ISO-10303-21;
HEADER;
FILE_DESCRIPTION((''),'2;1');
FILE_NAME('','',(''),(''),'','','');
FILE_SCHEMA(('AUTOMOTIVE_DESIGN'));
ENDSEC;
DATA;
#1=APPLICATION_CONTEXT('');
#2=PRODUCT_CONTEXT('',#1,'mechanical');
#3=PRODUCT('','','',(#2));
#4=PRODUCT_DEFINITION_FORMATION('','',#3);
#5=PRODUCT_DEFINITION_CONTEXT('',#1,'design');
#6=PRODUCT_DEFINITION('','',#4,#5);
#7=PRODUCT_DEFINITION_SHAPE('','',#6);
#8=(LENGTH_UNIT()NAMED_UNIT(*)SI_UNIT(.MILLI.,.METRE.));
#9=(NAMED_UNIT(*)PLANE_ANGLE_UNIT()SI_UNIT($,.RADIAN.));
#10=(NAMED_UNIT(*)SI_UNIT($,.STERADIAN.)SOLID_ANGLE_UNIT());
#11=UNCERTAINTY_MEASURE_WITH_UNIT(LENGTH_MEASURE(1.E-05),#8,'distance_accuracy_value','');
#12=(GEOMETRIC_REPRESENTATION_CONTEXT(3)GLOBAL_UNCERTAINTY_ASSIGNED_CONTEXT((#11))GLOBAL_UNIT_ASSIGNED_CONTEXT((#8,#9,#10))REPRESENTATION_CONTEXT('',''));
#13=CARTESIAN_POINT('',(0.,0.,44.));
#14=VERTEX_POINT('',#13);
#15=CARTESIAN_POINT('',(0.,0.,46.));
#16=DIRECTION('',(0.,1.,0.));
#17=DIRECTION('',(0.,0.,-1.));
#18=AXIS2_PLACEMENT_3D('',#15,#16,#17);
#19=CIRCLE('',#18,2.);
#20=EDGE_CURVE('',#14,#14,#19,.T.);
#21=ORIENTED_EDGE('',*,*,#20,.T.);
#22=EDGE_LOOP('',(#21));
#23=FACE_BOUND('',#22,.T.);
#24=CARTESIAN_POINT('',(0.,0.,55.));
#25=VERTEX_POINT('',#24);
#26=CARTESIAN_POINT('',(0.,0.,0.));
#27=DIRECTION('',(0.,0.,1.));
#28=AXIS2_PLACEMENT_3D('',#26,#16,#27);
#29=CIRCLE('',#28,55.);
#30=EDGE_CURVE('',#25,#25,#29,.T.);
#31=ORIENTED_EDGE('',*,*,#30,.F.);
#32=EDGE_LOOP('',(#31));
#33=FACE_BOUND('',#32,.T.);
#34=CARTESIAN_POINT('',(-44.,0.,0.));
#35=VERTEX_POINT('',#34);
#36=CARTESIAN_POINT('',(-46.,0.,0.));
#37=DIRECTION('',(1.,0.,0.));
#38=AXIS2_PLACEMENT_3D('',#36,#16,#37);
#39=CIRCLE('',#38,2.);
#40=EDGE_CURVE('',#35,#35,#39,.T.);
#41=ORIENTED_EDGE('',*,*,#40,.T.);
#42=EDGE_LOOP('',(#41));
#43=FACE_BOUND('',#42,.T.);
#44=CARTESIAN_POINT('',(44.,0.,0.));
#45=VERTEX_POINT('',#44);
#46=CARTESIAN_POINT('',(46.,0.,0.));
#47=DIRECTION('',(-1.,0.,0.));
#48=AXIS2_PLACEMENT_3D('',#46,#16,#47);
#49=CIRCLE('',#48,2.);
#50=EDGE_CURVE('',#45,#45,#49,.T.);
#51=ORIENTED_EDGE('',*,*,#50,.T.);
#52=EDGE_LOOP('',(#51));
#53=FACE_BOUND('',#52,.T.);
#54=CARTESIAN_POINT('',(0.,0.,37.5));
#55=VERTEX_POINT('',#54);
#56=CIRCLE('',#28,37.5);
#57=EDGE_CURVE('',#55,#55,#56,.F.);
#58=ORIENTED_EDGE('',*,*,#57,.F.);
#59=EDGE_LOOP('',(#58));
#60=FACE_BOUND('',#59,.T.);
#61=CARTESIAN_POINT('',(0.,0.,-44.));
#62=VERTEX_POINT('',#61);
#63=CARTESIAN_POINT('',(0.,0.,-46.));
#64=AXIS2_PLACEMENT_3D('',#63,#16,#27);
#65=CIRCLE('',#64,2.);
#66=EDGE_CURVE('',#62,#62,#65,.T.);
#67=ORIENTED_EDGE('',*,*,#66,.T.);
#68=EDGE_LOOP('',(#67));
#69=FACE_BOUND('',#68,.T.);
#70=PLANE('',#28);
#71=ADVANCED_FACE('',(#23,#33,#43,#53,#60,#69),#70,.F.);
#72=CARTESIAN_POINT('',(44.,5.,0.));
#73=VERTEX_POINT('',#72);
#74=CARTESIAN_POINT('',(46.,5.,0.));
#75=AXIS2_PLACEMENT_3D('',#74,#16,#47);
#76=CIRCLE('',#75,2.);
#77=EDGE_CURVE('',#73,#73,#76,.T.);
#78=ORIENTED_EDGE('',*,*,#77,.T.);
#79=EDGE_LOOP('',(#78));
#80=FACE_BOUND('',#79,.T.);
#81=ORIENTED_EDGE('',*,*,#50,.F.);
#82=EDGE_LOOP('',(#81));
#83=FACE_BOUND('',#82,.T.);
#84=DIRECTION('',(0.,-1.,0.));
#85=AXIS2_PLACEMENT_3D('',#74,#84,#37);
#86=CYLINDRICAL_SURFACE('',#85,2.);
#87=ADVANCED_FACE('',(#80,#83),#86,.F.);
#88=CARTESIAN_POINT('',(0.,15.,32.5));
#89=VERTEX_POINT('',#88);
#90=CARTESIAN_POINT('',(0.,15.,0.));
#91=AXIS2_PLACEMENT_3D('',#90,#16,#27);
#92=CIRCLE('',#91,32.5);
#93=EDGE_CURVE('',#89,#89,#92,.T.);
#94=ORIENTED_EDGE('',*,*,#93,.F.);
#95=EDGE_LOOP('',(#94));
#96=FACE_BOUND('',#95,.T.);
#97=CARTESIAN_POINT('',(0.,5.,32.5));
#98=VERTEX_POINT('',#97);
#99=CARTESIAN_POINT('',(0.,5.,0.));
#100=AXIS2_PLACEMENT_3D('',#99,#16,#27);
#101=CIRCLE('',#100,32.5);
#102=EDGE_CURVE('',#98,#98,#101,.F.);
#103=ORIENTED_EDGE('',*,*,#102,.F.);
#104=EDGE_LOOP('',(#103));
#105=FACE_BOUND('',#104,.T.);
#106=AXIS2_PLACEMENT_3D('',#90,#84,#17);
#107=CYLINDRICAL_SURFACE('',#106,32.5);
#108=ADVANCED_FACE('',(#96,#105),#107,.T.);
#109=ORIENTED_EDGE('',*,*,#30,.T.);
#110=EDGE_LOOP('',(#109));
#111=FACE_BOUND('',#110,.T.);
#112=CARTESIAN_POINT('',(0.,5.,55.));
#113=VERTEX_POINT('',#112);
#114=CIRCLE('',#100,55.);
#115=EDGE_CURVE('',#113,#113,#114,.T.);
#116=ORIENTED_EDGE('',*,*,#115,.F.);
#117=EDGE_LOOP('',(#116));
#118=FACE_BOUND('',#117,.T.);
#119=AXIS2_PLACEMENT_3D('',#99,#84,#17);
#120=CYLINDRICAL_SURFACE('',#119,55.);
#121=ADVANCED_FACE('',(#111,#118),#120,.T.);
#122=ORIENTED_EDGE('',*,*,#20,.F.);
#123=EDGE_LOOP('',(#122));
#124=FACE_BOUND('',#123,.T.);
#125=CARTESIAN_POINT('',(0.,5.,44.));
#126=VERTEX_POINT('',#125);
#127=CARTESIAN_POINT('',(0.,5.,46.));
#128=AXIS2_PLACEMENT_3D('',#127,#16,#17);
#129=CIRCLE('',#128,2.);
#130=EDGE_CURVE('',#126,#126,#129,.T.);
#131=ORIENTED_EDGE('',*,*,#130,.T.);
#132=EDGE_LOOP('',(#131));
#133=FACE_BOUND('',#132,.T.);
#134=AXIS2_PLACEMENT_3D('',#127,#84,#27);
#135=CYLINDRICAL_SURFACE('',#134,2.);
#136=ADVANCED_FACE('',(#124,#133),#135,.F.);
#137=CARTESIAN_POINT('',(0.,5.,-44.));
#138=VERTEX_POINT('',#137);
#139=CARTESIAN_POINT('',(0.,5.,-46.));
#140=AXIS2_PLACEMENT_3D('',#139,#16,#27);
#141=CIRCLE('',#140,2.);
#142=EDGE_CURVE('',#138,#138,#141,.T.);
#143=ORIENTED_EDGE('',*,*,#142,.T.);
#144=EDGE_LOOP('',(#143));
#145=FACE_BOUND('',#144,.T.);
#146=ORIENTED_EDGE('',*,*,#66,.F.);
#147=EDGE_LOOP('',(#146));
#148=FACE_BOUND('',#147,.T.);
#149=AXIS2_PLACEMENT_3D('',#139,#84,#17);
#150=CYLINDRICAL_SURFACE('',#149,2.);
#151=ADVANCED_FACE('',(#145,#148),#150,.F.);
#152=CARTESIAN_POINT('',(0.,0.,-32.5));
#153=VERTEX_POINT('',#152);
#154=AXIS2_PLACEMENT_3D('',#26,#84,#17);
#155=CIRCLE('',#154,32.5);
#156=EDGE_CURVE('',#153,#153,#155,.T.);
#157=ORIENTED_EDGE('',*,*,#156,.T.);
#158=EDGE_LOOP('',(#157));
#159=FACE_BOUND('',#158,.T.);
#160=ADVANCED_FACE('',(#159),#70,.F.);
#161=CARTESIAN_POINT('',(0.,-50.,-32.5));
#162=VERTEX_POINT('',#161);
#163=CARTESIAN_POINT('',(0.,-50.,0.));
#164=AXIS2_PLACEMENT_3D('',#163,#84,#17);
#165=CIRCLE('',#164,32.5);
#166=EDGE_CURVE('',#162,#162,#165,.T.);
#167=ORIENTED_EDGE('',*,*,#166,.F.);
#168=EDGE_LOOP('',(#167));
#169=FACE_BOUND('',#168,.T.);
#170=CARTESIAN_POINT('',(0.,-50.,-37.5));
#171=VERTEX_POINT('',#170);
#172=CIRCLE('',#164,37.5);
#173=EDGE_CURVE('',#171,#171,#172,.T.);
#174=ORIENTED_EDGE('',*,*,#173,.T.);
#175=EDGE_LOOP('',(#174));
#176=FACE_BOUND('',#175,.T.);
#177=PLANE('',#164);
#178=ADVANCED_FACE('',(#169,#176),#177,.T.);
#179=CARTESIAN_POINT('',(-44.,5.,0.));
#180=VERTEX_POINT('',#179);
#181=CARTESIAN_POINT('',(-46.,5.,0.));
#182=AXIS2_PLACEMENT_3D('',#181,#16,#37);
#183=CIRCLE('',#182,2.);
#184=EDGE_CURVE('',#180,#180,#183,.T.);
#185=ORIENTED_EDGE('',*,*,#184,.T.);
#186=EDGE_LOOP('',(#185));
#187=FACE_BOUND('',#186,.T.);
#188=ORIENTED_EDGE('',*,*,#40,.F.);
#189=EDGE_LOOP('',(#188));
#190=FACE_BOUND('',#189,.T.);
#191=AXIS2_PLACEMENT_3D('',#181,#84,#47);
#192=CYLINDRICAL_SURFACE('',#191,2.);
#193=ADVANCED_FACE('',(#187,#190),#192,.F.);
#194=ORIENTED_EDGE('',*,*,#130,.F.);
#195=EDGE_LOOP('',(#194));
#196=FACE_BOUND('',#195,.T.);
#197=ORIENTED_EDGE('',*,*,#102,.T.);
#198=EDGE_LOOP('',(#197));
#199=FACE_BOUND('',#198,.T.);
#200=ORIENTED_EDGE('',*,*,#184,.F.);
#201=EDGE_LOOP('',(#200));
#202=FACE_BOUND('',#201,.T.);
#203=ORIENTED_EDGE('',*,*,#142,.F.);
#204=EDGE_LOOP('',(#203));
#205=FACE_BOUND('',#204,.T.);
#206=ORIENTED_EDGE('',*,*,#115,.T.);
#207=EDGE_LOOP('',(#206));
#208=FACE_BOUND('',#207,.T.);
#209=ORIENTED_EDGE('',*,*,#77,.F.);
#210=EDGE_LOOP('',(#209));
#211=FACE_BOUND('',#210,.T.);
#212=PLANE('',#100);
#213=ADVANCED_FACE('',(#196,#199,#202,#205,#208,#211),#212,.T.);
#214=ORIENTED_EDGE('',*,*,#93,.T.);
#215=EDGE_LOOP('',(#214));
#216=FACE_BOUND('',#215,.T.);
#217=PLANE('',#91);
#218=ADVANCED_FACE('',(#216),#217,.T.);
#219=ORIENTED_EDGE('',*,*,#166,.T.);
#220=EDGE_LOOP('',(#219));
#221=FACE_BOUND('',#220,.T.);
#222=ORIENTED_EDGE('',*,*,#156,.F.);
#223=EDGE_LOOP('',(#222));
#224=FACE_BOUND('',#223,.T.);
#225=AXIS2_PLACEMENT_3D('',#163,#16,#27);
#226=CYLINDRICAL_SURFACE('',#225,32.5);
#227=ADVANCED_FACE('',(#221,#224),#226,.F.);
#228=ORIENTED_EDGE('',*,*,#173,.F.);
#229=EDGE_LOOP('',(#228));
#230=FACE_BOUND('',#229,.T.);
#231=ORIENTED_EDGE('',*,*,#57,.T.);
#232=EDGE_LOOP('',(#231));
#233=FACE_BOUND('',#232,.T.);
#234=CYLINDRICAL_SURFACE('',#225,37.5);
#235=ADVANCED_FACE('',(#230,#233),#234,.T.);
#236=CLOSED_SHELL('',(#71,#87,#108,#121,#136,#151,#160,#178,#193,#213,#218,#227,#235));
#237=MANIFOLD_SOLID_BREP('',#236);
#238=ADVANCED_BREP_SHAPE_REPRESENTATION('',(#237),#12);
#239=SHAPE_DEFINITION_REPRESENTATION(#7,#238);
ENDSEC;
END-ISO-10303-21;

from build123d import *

# Parameters (mm, degrees)
SKETCH1_R             = 55
SKETCH1_R_2           = 2
SKETCH1_R_3           = 32.5
BOSS_EXTRUDE1_DEPTH   = 5
SKETCH3_R             = 37.5
SKETCH3_R_2           = 32.5
BOSS_EXTRUDE3_DEPTH   = 50
BOSS_EXTRUDE4_START   = 15
SKETCH1_4_R           = 32.5
BOSS_EXTRUDE4_DEPTH   = 15
CIRPATTERN1_OUTLINE_R = 2
CIRPATTERN1_DEPTH     = 5


# Read off the part's stored shape, not the designer's step: CirPattern1
with BuildPart() as part:
    # Sketch1 → Boss-Extrude1 (new body)
    # profile 1 of 2: a face of its own
    with BuildSketch(Plane(origin=(0, 0, 0), x_dir=(1, 0, 0), z_dir=(0, 1, 0))):
        with Locations(Location((0, 0, 0), (0, 0, 270))):
            Circle(SKETCH1_R)
        with Locations(Location((0, 46, 0), (0, 0, 270))):
            Circle(SKETCH1_R_2, mode=Mode.SUBTRACT)
        Circle(SKETCH1_R_3, mode=Mode.SUBTRACT)
    # profile 2 of 2: a face of its own
    with BuildSketch(Plane(origin=(0, 0, 0), x_dir=(1, 0, 0), z_dir=(0, 1, 0))):
        Circle(SKETCH1_R_3)
    extrude(amount=BOSS_EXTRUDE1_DEPTH)

    # Sketch3 → Boss-Extrude3 (add)
    with BuildSketch(Plane.XZ):
        with Locations(Location((0, 0, 0), (0, 0, 90))):
            Circle(SKETCH3_R)
        with Locations(Location((0, 0, 0), (0, 0, 270))):
            Circle(SKETCH3_R_2, mode=Mode.SUBTRACT)
    extrude(amount=BOSS_EXTRUDE3_DEPTH)

    # Sketch1<4> → Boss-Extrude4 (add)
    with BuildSketch(Plane(origin=(0, 0, 0), x_dir=(1, 0, 0), z_dir=(0, 1, 0)).offset(BOSS_EXTRUDE4_START)):
        with Locations(Location((0, 0, 0), (0, 0, 90))):
            Circle(SKETCH1_4_R)
    extrude(amount=-BOSS_EXTRUDE4_DEPTH)

    # CirPattern1 outline → CirPattern1 (cut)
    with BuildSketch(Plane(origin=(0, 0, 0), x_dir=(1, 0, 0), z_dir=(0, 1, 0))):
        with Locations((46, 0)):
            Circle(CIRPATTERN1_OUTLINE_R)
        with Locations((0, -46)):
            Circle(CIRPATTERN1_OUTLINE_R)
        with Locations((-46, 0)):
            Circle(CIRPATTERN1_OUTLINE_R)
    extrude(amount=CIRPATTERN1_DEPTH, mode=Mode.SUBTRACT)


solid = part.part
